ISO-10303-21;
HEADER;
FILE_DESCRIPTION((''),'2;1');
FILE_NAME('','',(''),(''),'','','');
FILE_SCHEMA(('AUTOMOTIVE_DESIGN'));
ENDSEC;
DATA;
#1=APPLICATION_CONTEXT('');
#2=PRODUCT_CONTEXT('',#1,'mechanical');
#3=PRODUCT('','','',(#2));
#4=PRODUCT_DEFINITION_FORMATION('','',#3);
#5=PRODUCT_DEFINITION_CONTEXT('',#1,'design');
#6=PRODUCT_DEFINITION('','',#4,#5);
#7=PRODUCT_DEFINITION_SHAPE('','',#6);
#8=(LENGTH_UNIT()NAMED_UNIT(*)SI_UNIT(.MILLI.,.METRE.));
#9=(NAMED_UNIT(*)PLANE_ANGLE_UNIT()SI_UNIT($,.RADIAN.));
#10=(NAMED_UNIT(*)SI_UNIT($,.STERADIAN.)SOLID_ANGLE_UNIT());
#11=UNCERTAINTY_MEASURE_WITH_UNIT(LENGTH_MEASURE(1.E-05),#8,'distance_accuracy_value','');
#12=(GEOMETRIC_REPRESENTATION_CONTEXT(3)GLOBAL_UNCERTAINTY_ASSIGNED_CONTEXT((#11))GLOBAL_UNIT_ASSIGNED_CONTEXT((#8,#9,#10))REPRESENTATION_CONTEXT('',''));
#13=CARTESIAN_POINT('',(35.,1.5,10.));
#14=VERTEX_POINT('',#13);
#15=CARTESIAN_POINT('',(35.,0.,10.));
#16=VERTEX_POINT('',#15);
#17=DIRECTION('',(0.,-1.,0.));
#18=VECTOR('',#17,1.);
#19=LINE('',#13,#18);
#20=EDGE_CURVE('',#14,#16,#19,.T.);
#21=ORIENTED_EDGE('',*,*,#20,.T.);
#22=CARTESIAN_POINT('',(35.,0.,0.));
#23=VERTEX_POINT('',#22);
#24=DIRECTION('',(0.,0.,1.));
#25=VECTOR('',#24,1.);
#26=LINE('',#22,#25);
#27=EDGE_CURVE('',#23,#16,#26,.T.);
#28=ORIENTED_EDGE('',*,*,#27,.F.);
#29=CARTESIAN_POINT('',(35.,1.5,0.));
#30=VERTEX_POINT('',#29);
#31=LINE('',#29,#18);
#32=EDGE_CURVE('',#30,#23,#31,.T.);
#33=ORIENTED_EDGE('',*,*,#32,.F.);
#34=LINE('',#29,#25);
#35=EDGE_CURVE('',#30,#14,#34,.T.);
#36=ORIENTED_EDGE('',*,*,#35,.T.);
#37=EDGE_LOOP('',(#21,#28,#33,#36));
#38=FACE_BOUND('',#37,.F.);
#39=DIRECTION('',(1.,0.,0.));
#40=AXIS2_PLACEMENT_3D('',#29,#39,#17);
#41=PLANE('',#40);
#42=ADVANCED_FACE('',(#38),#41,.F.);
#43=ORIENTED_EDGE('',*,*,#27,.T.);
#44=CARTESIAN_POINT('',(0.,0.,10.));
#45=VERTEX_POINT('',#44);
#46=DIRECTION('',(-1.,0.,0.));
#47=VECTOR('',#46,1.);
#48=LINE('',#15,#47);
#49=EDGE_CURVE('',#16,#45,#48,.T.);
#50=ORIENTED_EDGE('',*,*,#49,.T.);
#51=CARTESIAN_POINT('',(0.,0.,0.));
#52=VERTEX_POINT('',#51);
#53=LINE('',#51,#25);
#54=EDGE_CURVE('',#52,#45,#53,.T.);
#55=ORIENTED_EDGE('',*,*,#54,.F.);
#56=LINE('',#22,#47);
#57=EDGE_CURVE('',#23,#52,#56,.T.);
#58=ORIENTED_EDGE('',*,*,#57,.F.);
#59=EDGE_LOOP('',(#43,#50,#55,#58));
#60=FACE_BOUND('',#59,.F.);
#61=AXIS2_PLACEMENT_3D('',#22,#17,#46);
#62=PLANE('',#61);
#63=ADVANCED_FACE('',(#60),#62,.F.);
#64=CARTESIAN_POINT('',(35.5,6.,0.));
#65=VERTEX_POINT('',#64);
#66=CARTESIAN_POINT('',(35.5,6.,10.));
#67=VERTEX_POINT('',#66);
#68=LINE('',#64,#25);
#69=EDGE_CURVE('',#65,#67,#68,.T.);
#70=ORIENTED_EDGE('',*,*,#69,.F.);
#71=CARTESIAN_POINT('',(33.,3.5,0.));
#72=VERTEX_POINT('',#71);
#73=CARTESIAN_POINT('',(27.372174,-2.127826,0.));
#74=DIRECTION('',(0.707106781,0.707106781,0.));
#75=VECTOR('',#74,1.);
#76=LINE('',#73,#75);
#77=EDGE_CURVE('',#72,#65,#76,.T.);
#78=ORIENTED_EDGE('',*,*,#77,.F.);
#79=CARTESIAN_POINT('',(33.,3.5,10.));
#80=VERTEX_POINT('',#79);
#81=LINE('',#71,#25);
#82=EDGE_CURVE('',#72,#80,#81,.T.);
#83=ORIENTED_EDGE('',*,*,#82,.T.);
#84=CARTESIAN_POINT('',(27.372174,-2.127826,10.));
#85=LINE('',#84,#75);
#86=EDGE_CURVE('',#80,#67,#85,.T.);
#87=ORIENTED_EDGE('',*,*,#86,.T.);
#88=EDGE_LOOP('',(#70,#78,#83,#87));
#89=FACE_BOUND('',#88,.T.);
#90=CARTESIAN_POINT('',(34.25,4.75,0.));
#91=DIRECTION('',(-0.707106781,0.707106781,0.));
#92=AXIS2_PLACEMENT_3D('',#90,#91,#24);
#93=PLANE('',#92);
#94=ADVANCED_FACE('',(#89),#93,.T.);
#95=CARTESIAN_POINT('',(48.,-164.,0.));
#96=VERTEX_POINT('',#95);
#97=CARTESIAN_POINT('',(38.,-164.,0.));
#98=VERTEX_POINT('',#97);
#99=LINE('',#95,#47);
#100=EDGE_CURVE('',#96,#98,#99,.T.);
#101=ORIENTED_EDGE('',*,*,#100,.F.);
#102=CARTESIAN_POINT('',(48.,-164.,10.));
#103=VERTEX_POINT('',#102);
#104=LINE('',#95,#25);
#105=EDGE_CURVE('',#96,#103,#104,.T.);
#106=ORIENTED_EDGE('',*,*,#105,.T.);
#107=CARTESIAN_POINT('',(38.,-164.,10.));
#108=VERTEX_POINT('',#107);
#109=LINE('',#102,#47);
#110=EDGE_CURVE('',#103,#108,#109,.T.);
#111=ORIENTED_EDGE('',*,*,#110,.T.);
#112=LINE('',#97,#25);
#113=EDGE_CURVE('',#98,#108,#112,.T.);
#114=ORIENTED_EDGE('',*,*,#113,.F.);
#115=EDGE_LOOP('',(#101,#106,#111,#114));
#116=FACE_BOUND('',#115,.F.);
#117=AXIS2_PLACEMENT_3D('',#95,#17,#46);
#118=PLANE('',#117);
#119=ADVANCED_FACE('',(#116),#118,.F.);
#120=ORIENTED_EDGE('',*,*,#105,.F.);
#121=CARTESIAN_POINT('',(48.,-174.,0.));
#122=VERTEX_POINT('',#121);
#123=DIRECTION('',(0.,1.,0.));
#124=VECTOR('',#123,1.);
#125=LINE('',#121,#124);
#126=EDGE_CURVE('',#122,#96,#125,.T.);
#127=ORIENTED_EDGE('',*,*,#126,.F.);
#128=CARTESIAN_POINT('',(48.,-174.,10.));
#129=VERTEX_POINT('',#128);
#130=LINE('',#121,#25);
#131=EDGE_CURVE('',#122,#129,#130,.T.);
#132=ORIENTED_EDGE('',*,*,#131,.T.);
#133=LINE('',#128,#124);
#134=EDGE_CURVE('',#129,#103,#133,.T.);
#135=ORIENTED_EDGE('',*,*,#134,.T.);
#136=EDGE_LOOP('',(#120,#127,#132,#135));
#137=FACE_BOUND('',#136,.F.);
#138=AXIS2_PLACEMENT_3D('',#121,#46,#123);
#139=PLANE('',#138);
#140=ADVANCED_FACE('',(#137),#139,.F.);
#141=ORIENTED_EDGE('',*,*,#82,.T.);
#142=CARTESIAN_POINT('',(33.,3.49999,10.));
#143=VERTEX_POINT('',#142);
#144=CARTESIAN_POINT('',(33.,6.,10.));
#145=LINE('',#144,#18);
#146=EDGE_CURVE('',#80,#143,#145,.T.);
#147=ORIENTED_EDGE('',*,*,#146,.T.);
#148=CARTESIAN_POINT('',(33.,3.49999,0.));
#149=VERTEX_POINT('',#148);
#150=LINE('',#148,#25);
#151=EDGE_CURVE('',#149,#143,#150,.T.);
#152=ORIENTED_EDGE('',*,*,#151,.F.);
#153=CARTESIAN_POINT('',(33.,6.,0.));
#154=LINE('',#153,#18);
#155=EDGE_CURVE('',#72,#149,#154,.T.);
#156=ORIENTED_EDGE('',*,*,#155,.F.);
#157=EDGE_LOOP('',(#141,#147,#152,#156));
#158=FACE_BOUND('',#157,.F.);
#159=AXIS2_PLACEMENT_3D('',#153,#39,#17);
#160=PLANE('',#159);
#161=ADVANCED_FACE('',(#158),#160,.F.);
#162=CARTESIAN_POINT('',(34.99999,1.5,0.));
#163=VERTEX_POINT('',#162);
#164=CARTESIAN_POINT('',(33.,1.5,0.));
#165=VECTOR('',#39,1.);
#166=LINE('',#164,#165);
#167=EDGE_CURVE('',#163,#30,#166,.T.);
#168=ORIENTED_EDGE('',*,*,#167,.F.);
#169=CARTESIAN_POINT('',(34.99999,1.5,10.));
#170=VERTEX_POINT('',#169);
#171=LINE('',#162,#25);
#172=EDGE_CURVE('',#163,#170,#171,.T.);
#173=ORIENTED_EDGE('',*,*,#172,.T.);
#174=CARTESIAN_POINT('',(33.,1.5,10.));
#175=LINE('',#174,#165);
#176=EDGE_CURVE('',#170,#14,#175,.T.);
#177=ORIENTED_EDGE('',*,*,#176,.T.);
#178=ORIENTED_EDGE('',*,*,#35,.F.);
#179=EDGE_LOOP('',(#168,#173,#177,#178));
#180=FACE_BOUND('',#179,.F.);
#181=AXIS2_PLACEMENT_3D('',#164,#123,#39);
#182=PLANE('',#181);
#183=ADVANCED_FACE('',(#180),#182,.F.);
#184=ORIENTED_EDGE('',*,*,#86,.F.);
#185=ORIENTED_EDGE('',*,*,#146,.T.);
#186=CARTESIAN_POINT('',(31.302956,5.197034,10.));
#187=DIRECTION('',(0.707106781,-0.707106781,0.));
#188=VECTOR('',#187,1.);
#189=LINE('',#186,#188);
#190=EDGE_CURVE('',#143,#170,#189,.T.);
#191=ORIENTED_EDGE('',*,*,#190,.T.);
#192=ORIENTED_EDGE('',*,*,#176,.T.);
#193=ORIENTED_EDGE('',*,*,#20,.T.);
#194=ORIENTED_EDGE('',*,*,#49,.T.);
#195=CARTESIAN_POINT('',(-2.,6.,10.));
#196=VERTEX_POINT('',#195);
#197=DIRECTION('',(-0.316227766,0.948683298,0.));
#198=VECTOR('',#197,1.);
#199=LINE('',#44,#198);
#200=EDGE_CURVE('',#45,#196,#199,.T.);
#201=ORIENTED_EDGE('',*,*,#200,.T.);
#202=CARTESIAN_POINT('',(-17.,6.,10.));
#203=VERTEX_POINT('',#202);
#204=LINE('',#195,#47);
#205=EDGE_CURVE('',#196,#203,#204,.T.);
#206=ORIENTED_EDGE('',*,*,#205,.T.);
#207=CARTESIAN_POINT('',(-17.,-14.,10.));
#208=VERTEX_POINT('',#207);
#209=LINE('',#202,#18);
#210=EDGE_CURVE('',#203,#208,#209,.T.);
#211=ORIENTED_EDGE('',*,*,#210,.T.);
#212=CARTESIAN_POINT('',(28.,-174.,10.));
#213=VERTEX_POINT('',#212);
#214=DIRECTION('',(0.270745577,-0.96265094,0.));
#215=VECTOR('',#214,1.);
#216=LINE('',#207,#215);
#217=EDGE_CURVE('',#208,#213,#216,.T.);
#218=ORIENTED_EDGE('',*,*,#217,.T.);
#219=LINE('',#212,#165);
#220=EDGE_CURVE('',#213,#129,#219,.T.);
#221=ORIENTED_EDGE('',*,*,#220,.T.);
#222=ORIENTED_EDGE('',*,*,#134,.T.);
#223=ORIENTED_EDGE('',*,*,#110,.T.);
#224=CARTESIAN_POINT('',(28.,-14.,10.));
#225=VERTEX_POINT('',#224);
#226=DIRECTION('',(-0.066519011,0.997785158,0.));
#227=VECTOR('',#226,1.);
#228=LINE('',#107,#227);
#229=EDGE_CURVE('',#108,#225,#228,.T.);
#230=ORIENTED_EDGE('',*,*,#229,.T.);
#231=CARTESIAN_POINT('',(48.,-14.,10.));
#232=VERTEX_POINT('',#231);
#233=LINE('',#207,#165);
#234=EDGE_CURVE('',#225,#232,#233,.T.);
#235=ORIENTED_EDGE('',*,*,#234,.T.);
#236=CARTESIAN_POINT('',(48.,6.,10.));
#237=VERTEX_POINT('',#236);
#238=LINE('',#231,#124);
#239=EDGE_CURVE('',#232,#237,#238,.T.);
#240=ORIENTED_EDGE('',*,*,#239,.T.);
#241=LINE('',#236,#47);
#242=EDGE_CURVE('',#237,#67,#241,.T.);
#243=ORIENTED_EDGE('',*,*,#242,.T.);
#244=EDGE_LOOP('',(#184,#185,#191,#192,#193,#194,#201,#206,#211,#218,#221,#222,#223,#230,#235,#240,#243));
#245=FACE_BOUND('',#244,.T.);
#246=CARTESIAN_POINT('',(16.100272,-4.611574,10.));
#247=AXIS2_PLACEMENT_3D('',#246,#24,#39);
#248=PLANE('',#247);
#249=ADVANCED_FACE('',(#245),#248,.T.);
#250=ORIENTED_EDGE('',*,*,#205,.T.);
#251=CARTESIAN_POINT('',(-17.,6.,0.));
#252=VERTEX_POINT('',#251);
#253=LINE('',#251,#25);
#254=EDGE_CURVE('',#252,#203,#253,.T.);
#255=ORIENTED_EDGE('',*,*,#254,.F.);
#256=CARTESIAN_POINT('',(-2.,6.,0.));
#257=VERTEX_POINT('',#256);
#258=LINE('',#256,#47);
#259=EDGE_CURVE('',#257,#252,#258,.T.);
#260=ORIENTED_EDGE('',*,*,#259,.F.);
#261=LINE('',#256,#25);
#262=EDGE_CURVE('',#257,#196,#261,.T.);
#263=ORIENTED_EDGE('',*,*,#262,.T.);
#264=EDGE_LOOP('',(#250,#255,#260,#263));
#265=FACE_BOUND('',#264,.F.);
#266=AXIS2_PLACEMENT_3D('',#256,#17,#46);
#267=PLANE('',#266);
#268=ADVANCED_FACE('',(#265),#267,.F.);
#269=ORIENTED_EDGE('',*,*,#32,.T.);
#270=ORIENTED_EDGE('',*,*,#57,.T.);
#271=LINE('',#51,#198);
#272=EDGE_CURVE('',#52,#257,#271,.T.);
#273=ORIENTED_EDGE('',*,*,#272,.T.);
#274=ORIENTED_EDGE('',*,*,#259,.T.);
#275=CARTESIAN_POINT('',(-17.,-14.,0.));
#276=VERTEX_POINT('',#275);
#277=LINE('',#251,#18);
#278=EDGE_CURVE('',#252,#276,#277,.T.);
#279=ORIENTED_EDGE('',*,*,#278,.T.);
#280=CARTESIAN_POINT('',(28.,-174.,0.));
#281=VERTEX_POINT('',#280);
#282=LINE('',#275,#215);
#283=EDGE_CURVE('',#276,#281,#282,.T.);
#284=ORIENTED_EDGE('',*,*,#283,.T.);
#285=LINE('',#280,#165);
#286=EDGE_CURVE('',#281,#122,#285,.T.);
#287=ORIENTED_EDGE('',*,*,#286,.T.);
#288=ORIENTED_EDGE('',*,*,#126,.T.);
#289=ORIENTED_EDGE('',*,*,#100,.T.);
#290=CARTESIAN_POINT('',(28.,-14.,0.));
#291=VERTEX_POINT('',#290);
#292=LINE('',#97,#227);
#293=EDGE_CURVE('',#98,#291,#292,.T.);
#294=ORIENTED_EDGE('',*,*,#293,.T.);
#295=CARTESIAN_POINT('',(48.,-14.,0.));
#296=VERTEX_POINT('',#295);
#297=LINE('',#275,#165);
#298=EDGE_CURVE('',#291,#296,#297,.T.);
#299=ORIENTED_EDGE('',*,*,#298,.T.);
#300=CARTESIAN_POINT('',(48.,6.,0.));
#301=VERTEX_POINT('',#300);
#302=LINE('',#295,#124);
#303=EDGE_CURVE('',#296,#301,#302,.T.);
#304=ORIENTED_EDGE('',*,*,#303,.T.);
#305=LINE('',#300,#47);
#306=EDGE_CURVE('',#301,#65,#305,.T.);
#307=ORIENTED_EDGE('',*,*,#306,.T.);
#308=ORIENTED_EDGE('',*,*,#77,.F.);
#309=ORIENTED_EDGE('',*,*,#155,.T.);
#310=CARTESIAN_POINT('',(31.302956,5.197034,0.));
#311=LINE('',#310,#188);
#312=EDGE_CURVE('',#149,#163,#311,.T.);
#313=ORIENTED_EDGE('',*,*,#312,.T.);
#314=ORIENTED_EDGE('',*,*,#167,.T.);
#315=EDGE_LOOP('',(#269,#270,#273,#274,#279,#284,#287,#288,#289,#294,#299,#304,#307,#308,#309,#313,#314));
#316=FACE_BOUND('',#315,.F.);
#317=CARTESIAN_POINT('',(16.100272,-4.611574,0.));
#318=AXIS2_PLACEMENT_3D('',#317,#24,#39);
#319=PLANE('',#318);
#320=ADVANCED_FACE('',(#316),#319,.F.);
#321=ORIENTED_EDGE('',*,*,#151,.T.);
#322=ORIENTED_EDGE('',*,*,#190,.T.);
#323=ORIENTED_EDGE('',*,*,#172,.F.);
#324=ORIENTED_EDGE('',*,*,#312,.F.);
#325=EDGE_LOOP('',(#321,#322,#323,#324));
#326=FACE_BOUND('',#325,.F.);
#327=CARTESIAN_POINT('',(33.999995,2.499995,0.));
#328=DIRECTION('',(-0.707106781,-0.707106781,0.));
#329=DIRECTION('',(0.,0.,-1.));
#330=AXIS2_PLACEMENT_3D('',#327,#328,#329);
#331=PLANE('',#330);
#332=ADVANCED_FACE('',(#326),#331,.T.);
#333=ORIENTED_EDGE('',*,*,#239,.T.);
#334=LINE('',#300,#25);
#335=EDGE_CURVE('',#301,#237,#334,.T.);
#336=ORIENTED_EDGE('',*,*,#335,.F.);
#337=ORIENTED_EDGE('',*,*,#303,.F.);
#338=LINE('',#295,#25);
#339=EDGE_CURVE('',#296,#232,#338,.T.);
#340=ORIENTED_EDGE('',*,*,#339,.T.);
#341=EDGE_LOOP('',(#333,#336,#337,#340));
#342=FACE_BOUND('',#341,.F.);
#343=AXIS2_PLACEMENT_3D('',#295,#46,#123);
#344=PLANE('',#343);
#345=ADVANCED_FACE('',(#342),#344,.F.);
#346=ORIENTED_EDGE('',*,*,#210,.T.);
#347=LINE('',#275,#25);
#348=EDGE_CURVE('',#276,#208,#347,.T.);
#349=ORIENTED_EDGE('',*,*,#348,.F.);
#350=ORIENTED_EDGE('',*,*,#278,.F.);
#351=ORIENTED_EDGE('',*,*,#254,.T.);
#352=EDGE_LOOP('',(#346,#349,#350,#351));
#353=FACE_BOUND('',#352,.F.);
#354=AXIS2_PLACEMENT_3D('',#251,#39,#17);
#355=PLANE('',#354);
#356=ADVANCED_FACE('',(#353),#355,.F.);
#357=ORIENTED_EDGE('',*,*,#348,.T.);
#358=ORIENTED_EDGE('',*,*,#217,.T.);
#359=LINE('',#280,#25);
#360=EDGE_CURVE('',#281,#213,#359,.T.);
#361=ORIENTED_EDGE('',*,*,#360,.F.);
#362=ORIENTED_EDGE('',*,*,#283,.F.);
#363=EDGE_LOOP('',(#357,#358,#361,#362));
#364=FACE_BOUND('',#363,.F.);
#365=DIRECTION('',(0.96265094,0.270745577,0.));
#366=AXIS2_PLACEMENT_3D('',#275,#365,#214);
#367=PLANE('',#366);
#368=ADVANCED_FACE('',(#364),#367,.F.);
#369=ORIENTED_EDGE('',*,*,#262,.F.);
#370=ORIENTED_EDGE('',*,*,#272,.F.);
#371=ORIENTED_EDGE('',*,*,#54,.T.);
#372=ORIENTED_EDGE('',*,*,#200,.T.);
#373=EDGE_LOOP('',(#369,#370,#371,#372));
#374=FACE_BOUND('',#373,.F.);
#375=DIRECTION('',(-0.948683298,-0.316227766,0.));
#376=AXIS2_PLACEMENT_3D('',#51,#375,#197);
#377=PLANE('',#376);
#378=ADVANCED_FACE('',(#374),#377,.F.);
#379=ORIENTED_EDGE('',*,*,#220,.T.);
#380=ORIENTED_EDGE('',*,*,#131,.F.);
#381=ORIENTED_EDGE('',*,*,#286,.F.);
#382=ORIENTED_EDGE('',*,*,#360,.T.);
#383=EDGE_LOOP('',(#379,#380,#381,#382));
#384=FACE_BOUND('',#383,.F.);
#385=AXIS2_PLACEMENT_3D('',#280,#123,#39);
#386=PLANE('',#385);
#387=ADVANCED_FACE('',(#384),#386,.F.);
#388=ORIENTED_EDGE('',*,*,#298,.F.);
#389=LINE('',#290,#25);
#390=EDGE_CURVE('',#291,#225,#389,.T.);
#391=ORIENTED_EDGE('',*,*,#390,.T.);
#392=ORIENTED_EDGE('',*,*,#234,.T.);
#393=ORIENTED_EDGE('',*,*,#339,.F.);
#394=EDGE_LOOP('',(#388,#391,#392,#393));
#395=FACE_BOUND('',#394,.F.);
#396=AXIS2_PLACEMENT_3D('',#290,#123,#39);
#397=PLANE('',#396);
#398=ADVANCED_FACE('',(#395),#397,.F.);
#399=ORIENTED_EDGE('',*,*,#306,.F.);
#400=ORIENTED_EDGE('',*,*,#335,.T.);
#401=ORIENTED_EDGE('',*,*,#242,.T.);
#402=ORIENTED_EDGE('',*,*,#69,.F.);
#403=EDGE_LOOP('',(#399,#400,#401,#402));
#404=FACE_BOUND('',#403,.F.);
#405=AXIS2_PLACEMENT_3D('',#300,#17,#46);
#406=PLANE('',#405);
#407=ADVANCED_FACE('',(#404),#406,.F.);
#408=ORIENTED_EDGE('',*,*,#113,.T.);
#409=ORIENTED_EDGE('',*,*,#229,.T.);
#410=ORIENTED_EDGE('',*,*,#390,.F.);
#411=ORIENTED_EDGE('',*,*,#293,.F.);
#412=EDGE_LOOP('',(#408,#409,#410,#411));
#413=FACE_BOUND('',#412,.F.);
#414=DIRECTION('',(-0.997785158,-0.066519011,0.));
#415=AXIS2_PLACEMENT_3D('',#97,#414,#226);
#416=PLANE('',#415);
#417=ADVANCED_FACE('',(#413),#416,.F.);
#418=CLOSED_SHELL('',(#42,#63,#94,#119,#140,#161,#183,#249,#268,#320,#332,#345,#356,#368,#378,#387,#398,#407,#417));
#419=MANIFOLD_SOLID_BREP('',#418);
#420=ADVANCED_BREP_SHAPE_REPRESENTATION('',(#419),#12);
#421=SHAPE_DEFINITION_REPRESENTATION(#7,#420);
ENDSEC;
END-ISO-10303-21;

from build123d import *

# Parameters (mm, degrees)
F1_DEPTH = 10
F2_SIZE  = 1.99999
F3_SIZE  = 2.5


# Not quite as in the source:
# - a fillet or chamfer is up to 0.001 mm smaller than in the source, because OpenCascade refuses the exact size


with BuildPart() as f1:
    # F0 (on Top) → F1 (new body)
    with BuildSketch(Plane.XY):
        Polygon((35, 0), (0, 0), (-2, 6), (-17, 6), (-17, -14), (28, -14), (48, -14), (48, 6), (33, 6), (33, 1.5), (35, 1.5), align=None)
        Polygon((28, -14), (-17, -14), (28, -174), (48, -174), (48, -164), (38, -164), align=None)
    extrude(amount=F1_DEPTH)

    # F2 (size 2 in the source; OpenCascade refuses exactly that, so slightly less here)
    f2_edges = [f1.edges().sort_by_distance(p)[0] for p in [
        (33, 1.5, 5),
    ]]
    chamfer(f2_edges, length=F2_SIZE)

    # F3
    f3_edges = [f1.edges().sort_by_distance(p)[0] for p in [
        (33, 6, 5),
    ]]
    chamfer(f3_edges, length=F3_SIZE)


solid = f1.part
